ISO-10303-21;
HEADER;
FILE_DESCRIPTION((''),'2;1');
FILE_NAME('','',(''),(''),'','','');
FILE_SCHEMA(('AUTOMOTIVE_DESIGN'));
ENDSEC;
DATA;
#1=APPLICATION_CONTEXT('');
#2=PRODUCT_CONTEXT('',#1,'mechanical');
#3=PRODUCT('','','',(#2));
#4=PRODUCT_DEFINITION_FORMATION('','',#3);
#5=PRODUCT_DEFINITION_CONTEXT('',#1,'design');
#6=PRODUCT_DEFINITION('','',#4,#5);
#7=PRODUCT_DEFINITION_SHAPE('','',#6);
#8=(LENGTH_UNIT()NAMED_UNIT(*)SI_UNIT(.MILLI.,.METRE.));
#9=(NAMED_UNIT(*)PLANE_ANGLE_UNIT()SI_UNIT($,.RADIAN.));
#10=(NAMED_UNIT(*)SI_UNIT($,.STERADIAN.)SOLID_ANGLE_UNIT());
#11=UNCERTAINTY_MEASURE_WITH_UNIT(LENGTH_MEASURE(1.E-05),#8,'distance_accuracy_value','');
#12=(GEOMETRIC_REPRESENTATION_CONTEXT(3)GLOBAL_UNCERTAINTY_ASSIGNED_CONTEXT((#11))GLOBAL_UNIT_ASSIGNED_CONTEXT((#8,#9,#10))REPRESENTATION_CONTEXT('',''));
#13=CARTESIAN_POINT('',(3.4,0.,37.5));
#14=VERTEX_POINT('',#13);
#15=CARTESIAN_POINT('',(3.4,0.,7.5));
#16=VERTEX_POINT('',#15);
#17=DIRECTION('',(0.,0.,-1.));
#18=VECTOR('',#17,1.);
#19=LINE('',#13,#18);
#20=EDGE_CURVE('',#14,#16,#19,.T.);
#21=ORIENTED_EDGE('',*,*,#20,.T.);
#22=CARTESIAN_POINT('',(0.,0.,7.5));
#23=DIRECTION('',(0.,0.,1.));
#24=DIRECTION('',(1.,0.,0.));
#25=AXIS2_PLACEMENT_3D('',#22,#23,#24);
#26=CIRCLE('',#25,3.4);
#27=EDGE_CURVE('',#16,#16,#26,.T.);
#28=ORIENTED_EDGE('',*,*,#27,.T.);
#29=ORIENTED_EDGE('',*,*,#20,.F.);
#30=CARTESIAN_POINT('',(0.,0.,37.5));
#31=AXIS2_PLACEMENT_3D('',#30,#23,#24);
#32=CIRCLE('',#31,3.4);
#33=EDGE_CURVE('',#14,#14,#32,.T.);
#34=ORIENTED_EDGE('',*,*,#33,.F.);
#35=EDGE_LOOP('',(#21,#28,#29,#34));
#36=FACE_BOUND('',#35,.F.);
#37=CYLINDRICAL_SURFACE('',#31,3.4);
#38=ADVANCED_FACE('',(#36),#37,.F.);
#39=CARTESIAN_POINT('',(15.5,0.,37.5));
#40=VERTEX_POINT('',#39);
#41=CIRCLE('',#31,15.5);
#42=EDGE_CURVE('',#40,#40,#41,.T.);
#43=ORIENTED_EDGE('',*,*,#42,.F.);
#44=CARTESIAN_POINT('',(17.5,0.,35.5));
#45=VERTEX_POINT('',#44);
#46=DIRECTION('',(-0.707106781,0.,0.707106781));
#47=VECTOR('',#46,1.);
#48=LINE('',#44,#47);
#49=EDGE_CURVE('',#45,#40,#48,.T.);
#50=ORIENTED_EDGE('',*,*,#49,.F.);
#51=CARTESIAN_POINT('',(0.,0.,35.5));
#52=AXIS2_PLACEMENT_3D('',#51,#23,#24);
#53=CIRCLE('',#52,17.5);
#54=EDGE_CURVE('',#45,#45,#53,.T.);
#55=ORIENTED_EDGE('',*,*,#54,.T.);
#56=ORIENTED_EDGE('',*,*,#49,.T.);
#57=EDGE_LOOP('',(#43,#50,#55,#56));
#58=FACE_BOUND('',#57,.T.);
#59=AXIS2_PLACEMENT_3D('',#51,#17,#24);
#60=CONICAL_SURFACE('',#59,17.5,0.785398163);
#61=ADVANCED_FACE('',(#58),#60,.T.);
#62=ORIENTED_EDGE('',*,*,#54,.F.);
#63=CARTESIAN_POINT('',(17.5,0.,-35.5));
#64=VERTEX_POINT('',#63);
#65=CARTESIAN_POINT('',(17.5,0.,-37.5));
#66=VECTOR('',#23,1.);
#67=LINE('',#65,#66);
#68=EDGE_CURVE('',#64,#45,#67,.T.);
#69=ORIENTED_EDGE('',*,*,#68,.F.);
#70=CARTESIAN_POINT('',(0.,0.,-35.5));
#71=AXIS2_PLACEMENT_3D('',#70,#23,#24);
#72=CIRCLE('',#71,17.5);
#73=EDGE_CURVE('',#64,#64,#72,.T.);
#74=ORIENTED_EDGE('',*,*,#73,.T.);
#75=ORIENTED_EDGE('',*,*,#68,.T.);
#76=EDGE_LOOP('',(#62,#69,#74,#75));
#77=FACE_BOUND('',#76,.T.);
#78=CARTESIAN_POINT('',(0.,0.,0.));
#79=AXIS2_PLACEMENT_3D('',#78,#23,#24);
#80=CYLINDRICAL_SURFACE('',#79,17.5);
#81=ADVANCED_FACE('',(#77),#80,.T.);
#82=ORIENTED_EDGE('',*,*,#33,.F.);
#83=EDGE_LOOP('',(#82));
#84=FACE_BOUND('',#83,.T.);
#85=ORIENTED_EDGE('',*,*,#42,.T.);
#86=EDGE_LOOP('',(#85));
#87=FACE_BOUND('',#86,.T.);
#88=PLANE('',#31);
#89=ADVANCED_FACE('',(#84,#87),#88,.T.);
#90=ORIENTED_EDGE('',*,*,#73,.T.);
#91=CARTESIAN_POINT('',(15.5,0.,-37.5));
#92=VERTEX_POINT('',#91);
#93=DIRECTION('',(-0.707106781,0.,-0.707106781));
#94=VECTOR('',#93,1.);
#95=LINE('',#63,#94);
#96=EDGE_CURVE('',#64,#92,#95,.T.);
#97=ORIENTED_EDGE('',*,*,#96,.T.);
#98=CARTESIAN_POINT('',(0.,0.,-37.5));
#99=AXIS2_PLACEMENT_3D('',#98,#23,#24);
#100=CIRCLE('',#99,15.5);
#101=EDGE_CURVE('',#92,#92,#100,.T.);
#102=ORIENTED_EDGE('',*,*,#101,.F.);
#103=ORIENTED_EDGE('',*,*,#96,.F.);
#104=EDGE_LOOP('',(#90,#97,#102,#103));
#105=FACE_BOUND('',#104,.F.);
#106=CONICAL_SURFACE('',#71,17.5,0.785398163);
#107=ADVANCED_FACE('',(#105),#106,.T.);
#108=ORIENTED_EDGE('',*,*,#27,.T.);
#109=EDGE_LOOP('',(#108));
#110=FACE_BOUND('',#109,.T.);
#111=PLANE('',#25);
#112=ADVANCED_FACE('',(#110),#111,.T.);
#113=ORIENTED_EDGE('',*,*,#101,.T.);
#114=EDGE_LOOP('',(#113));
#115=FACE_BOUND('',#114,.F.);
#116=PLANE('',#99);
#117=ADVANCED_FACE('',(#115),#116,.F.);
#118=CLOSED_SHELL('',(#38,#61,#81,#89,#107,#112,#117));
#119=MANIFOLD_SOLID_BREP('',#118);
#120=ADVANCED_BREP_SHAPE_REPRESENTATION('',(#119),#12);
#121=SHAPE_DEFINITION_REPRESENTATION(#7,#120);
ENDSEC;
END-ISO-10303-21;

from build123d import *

# Parameters (mm, degrees)
F0_R      = 17.5
F1_DEPTH  = 37.5
F2_R      = 4.25
F3_DEPTH  = 25
F4_SIZE   = 2
F6_R      = 17.5
F7_DEPTH  = 37.5
F8_R      = 4.25
F9_DEPTH  = 30
F10_SIZE  = 2
F11_R     = 5.5
F11_R_2   = 3.4
F12_DEPTH = 30


with BuildPart() as f1:
    # F0 (on Top) → F1 (new body, symmetric)
    with BuildSketch(Plane.XY):
        Circle(F0_R)
    extrude(amount=F1_DEPTH, both=True)

    # F2 (on face) → F3 (cut)
    with BuildSketch(Plane.XY.offset(37.5)):
        Circle(F2_R)
    extrude(amount=-F3_DEPTH, mode=Mode.SUBTRACT)

    # F4
    f4_edges = [f1.edges().sort_by_distance(p)[0] for p in [
        (-17.5, 0, 37.5),
        (-17.5, 0, -37.5),
    ]]
    chamfer(f4_edges, length=F4_SIZE)


with BuildPart() as f7:
    # F6 (on Top) → F7 (new body, symmetric)
    with BuildSketch(Plane.XY):
        Circle(F6_R)
    extrude(amount=F7_DEPTH, both=True)

    # F8 (on face) → F9 (cut)
    with BuildSketch(Plane.XY.offset(37.5)):
        Circle(F8_R)
    extrude(amount=-F9_DEPTH, mode=Mode.SUBTRACT)

    # F10
    f10_edges = [f7.edges().sort_by_distance(p)[0] for p in [
        (-17.5, 0, 37.5),
        (-17.5, 0, -37.5),
    ]]
    chamfer(f10_edges, length=F10_SIZE)

    # F11 (on face) → F12 (join)
    with BuildSketch(Plane.XY.offset(37.5)):
        Circle(F11_R)
        Circle(F11_R_2, mode=Mode.SUBTRACT)
    extrude(amount=-F12_DEPTH)


solid = f7.part
